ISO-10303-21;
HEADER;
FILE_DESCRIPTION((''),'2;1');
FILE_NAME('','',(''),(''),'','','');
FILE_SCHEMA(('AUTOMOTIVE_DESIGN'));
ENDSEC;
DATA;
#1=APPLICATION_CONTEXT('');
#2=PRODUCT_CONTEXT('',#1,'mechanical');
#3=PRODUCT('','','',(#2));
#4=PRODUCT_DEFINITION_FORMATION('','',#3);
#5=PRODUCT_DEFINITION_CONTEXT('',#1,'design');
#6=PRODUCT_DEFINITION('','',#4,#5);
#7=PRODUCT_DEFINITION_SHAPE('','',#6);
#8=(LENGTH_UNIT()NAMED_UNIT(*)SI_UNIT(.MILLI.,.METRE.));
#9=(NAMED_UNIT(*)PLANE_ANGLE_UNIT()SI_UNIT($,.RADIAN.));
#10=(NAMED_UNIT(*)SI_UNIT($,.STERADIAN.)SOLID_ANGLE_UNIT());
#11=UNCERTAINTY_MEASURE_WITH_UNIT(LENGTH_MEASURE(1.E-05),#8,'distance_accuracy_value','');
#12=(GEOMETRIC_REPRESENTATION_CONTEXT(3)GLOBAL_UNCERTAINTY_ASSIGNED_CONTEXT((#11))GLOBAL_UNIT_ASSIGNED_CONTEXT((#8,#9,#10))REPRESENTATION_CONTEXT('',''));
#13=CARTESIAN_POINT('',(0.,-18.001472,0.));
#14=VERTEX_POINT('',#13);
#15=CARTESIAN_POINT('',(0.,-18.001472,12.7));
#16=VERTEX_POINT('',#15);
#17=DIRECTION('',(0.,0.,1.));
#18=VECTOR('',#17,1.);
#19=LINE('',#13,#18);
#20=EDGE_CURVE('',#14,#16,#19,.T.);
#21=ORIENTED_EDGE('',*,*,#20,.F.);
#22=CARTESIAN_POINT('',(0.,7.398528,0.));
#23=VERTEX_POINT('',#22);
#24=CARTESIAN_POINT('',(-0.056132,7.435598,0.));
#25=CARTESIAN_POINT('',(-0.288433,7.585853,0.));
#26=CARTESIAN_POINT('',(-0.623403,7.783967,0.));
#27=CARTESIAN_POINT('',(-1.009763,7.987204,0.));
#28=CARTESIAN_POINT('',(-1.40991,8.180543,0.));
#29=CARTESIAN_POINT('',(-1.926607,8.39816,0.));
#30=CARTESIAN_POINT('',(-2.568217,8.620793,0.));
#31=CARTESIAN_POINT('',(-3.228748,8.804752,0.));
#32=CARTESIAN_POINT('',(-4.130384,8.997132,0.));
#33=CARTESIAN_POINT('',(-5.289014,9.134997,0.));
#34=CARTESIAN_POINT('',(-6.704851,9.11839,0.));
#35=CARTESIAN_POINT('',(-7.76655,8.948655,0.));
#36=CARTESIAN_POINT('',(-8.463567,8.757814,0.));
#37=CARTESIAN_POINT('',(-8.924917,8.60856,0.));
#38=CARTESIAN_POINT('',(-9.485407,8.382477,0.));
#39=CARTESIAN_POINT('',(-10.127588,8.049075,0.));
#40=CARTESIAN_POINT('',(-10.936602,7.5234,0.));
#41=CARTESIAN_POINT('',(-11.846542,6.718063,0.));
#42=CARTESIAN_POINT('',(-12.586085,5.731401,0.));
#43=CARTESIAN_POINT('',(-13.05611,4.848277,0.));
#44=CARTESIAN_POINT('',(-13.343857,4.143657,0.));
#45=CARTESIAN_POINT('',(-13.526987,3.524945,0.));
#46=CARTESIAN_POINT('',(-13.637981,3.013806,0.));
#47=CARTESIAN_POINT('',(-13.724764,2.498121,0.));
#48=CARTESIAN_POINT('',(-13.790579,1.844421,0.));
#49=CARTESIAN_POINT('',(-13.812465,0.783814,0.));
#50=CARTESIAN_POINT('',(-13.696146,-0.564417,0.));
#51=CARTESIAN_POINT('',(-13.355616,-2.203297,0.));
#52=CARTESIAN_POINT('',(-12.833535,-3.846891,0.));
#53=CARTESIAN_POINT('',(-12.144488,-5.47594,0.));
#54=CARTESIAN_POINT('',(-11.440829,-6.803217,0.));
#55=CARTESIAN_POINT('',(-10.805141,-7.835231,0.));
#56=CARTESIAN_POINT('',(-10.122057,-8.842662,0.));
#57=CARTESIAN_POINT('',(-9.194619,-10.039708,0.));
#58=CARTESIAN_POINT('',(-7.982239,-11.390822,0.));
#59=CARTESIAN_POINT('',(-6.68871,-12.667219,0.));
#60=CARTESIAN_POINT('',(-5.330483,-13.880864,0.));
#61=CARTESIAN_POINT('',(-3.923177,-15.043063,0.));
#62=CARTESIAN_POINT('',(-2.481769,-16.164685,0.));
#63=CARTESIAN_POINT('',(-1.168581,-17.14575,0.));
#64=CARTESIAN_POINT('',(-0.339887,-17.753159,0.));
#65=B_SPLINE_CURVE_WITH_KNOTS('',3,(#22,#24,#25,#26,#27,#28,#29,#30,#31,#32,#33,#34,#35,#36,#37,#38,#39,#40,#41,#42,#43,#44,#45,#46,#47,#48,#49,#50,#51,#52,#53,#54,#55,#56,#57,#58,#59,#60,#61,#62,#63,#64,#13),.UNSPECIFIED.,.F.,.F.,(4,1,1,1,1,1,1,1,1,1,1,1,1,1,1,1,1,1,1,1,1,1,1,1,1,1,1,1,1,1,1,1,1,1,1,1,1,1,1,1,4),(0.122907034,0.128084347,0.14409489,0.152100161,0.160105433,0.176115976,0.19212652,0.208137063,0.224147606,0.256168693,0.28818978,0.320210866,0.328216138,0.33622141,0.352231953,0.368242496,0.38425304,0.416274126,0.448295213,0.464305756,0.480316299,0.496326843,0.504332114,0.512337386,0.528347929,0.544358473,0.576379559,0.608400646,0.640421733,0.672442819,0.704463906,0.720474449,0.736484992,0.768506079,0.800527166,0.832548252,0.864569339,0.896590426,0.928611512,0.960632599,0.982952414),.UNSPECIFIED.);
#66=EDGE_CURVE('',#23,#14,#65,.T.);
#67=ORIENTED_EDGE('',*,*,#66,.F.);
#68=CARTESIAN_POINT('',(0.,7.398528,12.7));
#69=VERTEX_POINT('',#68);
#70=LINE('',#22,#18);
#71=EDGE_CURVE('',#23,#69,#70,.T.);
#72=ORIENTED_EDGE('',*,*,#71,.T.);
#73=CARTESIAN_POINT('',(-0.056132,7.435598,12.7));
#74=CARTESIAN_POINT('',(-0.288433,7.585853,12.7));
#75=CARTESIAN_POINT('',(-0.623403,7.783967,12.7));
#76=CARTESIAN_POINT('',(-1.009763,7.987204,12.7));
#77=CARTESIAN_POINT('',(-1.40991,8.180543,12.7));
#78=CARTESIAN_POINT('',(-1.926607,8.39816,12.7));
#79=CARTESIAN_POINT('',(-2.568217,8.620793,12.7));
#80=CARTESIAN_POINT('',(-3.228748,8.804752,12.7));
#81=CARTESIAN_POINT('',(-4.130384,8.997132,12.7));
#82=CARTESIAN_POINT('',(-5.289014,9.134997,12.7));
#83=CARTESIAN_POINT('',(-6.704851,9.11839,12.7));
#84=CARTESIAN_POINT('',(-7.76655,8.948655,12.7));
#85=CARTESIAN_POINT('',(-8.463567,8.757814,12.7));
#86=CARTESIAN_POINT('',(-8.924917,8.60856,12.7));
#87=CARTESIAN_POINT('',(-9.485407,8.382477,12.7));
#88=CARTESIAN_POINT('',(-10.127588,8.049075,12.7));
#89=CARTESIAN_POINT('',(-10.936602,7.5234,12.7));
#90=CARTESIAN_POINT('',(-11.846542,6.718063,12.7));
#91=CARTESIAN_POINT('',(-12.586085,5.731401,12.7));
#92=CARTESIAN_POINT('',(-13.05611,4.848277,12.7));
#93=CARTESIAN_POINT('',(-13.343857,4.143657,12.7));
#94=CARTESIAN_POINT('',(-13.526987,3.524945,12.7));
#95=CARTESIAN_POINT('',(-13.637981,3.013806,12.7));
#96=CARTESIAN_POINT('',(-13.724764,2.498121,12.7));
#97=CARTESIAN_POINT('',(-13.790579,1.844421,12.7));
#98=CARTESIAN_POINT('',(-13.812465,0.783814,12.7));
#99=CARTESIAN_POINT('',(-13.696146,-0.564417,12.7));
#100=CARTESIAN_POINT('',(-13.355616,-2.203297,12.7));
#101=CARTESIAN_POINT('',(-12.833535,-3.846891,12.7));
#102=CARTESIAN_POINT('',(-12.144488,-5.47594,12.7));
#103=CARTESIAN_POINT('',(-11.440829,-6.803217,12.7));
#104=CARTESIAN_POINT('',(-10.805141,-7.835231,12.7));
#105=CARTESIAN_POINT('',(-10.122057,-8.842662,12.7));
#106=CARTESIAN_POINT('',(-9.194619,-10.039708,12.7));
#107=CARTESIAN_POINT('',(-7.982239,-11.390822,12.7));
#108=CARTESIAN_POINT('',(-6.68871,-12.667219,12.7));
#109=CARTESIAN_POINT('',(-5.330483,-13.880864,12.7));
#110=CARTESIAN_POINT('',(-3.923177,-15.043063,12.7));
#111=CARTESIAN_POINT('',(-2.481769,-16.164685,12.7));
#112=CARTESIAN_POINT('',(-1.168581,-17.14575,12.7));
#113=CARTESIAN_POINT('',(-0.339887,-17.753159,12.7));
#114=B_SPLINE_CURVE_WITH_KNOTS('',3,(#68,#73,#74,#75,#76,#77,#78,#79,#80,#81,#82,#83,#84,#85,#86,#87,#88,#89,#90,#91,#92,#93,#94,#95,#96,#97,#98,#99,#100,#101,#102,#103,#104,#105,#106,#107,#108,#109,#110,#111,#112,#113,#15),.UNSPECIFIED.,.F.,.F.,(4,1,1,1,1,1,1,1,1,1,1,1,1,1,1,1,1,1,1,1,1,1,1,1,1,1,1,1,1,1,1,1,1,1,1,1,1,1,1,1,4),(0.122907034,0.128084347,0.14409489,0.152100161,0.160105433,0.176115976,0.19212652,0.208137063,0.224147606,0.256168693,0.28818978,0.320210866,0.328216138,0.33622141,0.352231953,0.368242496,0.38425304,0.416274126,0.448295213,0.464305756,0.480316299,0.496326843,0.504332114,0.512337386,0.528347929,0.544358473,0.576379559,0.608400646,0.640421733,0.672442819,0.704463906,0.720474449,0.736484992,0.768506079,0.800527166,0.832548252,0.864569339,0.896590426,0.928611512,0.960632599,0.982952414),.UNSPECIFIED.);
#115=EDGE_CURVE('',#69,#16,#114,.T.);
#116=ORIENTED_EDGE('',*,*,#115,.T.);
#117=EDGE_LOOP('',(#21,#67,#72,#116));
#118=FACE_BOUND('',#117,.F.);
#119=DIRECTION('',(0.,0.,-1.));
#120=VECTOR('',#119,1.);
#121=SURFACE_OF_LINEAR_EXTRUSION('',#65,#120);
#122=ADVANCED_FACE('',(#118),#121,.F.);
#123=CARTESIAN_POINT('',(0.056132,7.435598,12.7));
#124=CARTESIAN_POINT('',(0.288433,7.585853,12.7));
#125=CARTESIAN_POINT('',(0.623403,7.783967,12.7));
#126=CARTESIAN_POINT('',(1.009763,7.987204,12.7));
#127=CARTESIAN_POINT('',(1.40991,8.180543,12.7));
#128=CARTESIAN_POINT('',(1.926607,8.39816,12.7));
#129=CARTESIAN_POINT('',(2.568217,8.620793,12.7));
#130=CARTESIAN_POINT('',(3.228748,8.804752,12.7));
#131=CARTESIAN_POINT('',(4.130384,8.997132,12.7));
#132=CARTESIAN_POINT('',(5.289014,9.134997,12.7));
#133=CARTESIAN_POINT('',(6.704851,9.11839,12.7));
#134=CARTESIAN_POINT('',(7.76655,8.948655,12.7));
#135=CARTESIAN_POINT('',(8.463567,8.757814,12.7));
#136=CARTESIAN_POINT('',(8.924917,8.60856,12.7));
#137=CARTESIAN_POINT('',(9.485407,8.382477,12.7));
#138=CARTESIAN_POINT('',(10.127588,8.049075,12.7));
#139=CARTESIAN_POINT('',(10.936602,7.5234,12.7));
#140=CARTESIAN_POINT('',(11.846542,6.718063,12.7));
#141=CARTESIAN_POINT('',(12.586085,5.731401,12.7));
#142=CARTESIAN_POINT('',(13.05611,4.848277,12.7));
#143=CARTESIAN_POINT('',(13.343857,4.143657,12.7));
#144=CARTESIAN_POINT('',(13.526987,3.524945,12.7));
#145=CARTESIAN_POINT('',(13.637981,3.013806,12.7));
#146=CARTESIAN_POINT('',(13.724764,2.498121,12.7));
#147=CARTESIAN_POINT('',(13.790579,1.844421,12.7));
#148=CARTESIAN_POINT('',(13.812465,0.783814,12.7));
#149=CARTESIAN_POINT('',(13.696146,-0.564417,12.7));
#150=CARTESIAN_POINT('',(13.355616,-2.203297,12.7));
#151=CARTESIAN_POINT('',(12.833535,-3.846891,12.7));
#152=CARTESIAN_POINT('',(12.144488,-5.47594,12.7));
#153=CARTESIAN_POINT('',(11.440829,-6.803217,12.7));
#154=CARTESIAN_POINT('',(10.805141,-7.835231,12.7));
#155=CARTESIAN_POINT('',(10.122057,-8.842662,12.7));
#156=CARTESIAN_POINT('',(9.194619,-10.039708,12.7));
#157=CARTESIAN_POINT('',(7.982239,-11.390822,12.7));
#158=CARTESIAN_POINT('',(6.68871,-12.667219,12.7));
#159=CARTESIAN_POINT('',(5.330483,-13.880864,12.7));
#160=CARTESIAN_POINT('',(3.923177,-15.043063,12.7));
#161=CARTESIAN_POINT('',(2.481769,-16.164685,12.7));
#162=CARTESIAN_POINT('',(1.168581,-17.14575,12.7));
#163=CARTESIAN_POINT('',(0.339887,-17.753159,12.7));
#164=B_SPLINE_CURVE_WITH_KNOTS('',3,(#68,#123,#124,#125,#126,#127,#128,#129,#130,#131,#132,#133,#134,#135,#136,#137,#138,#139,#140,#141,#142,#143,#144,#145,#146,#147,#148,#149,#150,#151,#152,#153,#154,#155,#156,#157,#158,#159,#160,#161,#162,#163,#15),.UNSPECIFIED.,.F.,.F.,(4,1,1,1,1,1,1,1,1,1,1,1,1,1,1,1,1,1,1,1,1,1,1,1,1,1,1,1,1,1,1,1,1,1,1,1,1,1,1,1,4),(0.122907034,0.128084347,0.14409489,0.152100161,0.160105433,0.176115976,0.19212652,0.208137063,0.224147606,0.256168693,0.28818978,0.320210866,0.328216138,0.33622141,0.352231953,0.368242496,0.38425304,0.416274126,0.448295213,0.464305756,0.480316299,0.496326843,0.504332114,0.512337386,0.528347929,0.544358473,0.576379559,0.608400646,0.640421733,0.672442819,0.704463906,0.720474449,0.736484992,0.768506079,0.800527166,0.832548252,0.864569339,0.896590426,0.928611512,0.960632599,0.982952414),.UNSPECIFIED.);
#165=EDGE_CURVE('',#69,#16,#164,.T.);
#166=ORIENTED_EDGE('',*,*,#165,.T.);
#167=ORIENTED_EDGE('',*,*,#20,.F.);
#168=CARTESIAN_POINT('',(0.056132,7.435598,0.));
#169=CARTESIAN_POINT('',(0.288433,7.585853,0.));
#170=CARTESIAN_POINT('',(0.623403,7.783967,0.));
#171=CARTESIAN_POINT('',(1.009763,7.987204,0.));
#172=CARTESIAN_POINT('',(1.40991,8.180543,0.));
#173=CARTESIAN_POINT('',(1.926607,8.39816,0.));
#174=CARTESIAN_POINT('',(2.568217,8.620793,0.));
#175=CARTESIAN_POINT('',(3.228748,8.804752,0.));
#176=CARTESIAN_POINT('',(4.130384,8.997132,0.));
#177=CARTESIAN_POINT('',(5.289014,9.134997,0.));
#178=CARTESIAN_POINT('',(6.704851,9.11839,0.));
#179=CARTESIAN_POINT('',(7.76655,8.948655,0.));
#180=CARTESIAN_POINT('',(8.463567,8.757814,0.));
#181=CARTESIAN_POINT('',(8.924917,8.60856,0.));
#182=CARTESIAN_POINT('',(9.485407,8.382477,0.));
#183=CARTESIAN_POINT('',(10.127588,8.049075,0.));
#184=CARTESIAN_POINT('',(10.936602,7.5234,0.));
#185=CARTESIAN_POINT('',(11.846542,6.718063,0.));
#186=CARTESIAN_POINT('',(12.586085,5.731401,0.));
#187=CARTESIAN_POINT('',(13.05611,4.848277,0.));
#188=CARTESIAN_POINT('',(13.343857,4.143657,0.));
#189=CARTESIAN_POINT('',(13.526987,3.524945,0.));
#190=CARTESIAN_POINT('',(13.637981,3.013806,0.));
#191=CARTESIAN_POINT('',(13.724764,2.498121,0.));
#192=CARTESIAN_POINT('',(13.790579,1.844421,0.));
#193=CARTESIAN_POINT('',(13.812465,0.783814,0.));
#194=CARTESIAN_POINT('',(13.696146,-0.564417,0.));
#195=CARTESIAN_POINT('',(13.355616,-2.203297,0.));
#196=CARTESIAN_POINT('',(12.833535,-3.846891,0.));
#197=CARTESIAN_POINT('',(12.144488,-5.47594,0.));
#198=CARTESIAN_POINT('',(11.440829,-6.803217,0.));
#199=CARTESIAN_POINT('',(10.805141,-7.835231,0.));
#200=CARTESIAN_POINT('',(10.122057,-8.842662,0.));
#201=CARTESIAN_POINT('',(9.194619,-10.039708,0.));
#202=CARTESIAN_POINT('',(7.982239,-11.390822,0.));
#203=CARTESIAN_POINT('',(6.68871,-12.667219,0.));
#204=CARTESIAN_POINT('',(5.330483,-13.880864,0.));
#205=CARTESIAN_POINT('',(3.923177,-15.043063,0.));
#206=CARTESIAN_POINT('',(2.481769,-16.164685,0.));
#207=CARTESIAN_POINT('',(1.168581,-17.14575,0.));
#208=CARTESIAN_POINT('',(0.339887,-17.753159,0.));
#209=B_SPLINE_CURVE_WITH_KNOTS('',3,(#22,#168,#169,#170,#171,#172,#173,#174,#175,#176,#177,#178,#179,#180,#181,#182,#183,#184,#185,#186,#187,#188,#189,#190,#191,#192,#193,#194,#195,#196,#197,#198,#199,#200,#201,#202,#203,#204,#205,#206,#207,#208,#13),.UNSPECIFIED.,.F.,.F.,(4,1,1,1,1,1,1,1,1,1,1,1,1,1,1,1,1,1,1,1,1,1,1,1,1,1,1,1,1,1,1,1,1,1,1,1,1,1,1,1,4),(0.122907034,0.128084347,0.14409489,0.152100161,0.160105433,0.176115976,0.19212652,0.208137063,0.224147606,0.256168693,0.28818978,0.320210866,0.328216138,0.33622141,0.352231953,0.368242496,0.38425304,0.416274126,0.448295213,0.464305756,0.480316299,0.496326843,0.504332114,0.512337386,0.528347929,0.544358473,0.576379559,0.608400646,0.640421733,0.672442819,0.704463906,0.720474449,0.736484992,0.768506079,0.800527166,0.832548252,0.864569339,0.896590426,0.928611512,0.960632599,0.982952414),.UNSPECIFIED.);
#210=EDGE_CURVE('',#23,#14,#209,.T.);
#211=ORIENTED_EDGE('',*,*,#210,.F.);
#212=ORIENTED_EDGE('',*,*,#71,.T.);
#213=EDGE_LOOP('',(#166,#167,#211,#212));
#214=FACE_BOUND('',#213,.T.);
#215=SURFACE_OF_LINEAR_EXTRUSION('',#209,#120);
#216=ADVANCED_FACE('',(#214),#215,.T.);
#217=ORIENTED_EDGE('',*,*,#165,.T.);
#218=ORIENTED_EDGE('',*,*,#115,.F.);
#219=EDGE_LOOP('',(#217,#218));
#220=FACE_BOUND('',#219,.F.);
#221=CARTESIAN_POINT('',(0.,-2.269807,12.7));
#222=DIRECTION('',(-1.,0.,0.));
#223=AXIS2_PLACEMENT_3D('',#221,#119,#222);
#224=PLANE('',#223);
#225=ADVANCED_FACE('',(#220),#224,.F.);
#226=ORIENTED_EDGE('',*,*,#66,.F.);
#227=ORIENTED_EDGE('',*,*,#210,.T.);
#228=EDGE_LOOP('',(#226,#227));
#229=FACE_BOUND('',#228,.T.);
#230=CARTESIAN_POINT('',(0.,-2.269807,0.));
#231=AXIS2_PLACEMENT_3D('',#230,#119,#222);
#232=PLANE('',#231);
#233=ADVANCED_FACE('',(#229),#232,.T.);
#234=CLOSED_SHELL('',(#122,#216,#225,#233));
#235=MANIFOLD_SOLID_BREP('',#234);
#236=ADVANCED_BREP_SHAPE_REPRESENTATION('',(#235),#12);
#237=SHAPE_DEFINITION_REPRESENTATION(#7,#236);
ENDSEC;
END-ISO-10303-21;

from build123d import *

# Parameters (mm, degrees)
F1_DEPTH = 12.7


# Not quite as in the source:
# - the dataset's text gives a spline's control points without its knots; the knots are read off the source's solid


with BuildPart() as f1:
    # F0 (on Top) → F1 (new body)
    with BuildSketch(Plane.XY):
        with BuildLine():
            add(Edge.make_bspline(
                [(0, 7.3985277553), (0.0561317913, 7.4355978201), (0.2884330841, 7.5858529945), (0.6234033364, 7.7839671378), (1.0097634379, 7.9872043524), (1.4099097954, 8.1805425071), (1.9266069091, 8.3981604537), (2.568217098, 8.6207931494), (3.2287477023, 8.8047516143), (4.1303838823, 8.9971318489), (5.289014144, 9.1349974082), (6.7048507265, 9.1183901501), (7.7665502497, 8.9486545011), (8.4635672947, 8.7578139959), (8.924916934, 8.608559512), (9.4854066891, 8.3824765368), (10.1275883188, 8.0490745126), (10.9366024292, 7.5233995043), (11.8465417819, 6.7180627841), (12.5860853692, 5.7314011473), (13.0561102842, 4.8482770761), (13.3438572483, 4.1436573712), (13.5269870465, 3.5249453278), (13.6379814755, 3.0138060633), (13.7247636765, 2.4981208728), (13.7905794586, 1.8444205109), (13.8124648138, 0.7838140306), (13.6961458361, -0.5644171318), (13.3556158381, -2.2032973109), (12.8335347256, -3.8468908713), (12.1444882554, -5.4759402949), (11.4408288043, -6.8032166551), (10.8051411167, -7.8352312055), (10.1220567014, -8.8426622927), (9.1946194769, -10.0397077732), (7.9822385799, -11.3908223198), (6.6887104132, -12.6672193119), (5.3304832165, -13.8808637723), (3.9231768508, -15.0430633389), (2.4817693359, -16.164685428), (1.1685813845, -17.1457503238), (0.3398869399, -17.7531588062), (0, -18.0014722447)],
                knots=[0.1229070341, 0.1229070341, 0.1229070341, 0.1229070341, 0.1280843465, 0.1440948898, 0.1521001615, 0.1601054331, 0.1761159765, 0.1921265198, 0.2081370631, 0.2241476064, 0.256168693, 0.2881897797, 0.3202108663, 0.3282161379, 0.3362214096, 0.3522319529, 0.3682424962, 0.3842530395, 0.4162741262, 0.4482952128, 0.4643057561, 0.4803162994, 0.4963268427, 0.5043321144, 0.5123373861, 0.5283479294, 0.5443584727, 0.5763795593, 0.6084006459, 0.6404217326, 0.6724428192, 0.7044639058, 0.7204744491, 0.7364849925, 0.7685060791, 0.8005271657, 0.8325482523, 0.864569339, 0.8965904256, 0.9286115122, 0.9606325989, 0.9829524144, 0.9829524144, 0.9829524144, 0.9829524144], degree=3))
            add(Edge.make_bspline(
                [(0, 7.3985277553), (-0.0561317913, 7.4355978201), (-0.2884330841, 7.5858529945), (-0.6234033364, 7.7839671378), (-1.0097634379, 7.9872043524), (-1.4099097954, 8.1805425071), (-1.9266069091, 8.3981604537), (-2.568217098, 8.6207931494), (-3.2287477023, 8.8047516143), (-4.1303838823, 8.9971318489), (-5.289014144, 9.1349974082), (-6.7048507265, 9.1183901501), (-7.7665502497, 8.9486545011), (-8.4635672947, 8.7578139959), (-8.924916934, 8.608559512), (-9.485406689, 8.3824765368), (-10.1275883188, 8.0490745126), (-10.9366024292, 7.5233995043), (-11.8465417818, 6.7180627841), (-12.5860853692, 5.7314011473), (-13.0561102842, 4.8482770761), (-13.3438572483, 4.1436573712), (-13.5269870465, 3.5249453278), (-13.6379814755, 3.0138060633), (-13.7247636764, 2.4981208728), (-13.7905794586, 1.8444205109), (-13.8124648138, 0.7838140306), (-13.6961458361, -0.5644171318), (-13.3556158381, -2.2032973109), (-12.8335347256, -3.8468908713), (-12.1444882554, -5.4759402949), (-11.4408288043, -6.8032166551), (-10.8051411167, -7.8352312055), (-10.1220567014, -8.8426622927), (-9.1946194769, -10.0397077732), (-7.9822385799, -11.3908223198), (-6.6887104132, -12.6672193119), (-5.3304832165, -13.8808637723), (-3.9231768508, -15.0430633389), (-2.4817693359, -16.164685428), (-1.1685813845, -17.1457503238), (-0.3398869399, -17.7531588062), (0, -18.0014722447)],
                knots=[0.1229070341, 0.1229070341, 0.1229070341, 0.1229070341, 0.1280843465, 0.1440948898, 0.1521001615, 0.1601054331, 0.1761159765, 0.1921265198, 0.2081370631, 0.2241476064, 0.256168693, 0.2881897797, 0.3202108663, 0.3282161379, 0.3362214096, 0.3522319529, 0.3682424962, 0.3842530395, 0.4162741262, 0.4482952128, 0.4643057561, 0.4803162994, 0.4963268427, 0.5043321144, 0.5123373861, 0.5283479294, 0.5443584727, 0.5763795593, 0.6084006459, 0.6404217326, 0.6724428192, 0.7044639058, 0.7204744491, 0.7364849925, 0.7685060791, 0.8005271657, 0.8325482523, 0.864569339, 0.8965904256, 0.9286115122, 0.9606325989, 0.9829524144, 0.9829524144, 0.9829524144, 0.9829524144], degree=3))
        make_face()
    extrude(amount=F1_DEPTH)


solid = f1.part
